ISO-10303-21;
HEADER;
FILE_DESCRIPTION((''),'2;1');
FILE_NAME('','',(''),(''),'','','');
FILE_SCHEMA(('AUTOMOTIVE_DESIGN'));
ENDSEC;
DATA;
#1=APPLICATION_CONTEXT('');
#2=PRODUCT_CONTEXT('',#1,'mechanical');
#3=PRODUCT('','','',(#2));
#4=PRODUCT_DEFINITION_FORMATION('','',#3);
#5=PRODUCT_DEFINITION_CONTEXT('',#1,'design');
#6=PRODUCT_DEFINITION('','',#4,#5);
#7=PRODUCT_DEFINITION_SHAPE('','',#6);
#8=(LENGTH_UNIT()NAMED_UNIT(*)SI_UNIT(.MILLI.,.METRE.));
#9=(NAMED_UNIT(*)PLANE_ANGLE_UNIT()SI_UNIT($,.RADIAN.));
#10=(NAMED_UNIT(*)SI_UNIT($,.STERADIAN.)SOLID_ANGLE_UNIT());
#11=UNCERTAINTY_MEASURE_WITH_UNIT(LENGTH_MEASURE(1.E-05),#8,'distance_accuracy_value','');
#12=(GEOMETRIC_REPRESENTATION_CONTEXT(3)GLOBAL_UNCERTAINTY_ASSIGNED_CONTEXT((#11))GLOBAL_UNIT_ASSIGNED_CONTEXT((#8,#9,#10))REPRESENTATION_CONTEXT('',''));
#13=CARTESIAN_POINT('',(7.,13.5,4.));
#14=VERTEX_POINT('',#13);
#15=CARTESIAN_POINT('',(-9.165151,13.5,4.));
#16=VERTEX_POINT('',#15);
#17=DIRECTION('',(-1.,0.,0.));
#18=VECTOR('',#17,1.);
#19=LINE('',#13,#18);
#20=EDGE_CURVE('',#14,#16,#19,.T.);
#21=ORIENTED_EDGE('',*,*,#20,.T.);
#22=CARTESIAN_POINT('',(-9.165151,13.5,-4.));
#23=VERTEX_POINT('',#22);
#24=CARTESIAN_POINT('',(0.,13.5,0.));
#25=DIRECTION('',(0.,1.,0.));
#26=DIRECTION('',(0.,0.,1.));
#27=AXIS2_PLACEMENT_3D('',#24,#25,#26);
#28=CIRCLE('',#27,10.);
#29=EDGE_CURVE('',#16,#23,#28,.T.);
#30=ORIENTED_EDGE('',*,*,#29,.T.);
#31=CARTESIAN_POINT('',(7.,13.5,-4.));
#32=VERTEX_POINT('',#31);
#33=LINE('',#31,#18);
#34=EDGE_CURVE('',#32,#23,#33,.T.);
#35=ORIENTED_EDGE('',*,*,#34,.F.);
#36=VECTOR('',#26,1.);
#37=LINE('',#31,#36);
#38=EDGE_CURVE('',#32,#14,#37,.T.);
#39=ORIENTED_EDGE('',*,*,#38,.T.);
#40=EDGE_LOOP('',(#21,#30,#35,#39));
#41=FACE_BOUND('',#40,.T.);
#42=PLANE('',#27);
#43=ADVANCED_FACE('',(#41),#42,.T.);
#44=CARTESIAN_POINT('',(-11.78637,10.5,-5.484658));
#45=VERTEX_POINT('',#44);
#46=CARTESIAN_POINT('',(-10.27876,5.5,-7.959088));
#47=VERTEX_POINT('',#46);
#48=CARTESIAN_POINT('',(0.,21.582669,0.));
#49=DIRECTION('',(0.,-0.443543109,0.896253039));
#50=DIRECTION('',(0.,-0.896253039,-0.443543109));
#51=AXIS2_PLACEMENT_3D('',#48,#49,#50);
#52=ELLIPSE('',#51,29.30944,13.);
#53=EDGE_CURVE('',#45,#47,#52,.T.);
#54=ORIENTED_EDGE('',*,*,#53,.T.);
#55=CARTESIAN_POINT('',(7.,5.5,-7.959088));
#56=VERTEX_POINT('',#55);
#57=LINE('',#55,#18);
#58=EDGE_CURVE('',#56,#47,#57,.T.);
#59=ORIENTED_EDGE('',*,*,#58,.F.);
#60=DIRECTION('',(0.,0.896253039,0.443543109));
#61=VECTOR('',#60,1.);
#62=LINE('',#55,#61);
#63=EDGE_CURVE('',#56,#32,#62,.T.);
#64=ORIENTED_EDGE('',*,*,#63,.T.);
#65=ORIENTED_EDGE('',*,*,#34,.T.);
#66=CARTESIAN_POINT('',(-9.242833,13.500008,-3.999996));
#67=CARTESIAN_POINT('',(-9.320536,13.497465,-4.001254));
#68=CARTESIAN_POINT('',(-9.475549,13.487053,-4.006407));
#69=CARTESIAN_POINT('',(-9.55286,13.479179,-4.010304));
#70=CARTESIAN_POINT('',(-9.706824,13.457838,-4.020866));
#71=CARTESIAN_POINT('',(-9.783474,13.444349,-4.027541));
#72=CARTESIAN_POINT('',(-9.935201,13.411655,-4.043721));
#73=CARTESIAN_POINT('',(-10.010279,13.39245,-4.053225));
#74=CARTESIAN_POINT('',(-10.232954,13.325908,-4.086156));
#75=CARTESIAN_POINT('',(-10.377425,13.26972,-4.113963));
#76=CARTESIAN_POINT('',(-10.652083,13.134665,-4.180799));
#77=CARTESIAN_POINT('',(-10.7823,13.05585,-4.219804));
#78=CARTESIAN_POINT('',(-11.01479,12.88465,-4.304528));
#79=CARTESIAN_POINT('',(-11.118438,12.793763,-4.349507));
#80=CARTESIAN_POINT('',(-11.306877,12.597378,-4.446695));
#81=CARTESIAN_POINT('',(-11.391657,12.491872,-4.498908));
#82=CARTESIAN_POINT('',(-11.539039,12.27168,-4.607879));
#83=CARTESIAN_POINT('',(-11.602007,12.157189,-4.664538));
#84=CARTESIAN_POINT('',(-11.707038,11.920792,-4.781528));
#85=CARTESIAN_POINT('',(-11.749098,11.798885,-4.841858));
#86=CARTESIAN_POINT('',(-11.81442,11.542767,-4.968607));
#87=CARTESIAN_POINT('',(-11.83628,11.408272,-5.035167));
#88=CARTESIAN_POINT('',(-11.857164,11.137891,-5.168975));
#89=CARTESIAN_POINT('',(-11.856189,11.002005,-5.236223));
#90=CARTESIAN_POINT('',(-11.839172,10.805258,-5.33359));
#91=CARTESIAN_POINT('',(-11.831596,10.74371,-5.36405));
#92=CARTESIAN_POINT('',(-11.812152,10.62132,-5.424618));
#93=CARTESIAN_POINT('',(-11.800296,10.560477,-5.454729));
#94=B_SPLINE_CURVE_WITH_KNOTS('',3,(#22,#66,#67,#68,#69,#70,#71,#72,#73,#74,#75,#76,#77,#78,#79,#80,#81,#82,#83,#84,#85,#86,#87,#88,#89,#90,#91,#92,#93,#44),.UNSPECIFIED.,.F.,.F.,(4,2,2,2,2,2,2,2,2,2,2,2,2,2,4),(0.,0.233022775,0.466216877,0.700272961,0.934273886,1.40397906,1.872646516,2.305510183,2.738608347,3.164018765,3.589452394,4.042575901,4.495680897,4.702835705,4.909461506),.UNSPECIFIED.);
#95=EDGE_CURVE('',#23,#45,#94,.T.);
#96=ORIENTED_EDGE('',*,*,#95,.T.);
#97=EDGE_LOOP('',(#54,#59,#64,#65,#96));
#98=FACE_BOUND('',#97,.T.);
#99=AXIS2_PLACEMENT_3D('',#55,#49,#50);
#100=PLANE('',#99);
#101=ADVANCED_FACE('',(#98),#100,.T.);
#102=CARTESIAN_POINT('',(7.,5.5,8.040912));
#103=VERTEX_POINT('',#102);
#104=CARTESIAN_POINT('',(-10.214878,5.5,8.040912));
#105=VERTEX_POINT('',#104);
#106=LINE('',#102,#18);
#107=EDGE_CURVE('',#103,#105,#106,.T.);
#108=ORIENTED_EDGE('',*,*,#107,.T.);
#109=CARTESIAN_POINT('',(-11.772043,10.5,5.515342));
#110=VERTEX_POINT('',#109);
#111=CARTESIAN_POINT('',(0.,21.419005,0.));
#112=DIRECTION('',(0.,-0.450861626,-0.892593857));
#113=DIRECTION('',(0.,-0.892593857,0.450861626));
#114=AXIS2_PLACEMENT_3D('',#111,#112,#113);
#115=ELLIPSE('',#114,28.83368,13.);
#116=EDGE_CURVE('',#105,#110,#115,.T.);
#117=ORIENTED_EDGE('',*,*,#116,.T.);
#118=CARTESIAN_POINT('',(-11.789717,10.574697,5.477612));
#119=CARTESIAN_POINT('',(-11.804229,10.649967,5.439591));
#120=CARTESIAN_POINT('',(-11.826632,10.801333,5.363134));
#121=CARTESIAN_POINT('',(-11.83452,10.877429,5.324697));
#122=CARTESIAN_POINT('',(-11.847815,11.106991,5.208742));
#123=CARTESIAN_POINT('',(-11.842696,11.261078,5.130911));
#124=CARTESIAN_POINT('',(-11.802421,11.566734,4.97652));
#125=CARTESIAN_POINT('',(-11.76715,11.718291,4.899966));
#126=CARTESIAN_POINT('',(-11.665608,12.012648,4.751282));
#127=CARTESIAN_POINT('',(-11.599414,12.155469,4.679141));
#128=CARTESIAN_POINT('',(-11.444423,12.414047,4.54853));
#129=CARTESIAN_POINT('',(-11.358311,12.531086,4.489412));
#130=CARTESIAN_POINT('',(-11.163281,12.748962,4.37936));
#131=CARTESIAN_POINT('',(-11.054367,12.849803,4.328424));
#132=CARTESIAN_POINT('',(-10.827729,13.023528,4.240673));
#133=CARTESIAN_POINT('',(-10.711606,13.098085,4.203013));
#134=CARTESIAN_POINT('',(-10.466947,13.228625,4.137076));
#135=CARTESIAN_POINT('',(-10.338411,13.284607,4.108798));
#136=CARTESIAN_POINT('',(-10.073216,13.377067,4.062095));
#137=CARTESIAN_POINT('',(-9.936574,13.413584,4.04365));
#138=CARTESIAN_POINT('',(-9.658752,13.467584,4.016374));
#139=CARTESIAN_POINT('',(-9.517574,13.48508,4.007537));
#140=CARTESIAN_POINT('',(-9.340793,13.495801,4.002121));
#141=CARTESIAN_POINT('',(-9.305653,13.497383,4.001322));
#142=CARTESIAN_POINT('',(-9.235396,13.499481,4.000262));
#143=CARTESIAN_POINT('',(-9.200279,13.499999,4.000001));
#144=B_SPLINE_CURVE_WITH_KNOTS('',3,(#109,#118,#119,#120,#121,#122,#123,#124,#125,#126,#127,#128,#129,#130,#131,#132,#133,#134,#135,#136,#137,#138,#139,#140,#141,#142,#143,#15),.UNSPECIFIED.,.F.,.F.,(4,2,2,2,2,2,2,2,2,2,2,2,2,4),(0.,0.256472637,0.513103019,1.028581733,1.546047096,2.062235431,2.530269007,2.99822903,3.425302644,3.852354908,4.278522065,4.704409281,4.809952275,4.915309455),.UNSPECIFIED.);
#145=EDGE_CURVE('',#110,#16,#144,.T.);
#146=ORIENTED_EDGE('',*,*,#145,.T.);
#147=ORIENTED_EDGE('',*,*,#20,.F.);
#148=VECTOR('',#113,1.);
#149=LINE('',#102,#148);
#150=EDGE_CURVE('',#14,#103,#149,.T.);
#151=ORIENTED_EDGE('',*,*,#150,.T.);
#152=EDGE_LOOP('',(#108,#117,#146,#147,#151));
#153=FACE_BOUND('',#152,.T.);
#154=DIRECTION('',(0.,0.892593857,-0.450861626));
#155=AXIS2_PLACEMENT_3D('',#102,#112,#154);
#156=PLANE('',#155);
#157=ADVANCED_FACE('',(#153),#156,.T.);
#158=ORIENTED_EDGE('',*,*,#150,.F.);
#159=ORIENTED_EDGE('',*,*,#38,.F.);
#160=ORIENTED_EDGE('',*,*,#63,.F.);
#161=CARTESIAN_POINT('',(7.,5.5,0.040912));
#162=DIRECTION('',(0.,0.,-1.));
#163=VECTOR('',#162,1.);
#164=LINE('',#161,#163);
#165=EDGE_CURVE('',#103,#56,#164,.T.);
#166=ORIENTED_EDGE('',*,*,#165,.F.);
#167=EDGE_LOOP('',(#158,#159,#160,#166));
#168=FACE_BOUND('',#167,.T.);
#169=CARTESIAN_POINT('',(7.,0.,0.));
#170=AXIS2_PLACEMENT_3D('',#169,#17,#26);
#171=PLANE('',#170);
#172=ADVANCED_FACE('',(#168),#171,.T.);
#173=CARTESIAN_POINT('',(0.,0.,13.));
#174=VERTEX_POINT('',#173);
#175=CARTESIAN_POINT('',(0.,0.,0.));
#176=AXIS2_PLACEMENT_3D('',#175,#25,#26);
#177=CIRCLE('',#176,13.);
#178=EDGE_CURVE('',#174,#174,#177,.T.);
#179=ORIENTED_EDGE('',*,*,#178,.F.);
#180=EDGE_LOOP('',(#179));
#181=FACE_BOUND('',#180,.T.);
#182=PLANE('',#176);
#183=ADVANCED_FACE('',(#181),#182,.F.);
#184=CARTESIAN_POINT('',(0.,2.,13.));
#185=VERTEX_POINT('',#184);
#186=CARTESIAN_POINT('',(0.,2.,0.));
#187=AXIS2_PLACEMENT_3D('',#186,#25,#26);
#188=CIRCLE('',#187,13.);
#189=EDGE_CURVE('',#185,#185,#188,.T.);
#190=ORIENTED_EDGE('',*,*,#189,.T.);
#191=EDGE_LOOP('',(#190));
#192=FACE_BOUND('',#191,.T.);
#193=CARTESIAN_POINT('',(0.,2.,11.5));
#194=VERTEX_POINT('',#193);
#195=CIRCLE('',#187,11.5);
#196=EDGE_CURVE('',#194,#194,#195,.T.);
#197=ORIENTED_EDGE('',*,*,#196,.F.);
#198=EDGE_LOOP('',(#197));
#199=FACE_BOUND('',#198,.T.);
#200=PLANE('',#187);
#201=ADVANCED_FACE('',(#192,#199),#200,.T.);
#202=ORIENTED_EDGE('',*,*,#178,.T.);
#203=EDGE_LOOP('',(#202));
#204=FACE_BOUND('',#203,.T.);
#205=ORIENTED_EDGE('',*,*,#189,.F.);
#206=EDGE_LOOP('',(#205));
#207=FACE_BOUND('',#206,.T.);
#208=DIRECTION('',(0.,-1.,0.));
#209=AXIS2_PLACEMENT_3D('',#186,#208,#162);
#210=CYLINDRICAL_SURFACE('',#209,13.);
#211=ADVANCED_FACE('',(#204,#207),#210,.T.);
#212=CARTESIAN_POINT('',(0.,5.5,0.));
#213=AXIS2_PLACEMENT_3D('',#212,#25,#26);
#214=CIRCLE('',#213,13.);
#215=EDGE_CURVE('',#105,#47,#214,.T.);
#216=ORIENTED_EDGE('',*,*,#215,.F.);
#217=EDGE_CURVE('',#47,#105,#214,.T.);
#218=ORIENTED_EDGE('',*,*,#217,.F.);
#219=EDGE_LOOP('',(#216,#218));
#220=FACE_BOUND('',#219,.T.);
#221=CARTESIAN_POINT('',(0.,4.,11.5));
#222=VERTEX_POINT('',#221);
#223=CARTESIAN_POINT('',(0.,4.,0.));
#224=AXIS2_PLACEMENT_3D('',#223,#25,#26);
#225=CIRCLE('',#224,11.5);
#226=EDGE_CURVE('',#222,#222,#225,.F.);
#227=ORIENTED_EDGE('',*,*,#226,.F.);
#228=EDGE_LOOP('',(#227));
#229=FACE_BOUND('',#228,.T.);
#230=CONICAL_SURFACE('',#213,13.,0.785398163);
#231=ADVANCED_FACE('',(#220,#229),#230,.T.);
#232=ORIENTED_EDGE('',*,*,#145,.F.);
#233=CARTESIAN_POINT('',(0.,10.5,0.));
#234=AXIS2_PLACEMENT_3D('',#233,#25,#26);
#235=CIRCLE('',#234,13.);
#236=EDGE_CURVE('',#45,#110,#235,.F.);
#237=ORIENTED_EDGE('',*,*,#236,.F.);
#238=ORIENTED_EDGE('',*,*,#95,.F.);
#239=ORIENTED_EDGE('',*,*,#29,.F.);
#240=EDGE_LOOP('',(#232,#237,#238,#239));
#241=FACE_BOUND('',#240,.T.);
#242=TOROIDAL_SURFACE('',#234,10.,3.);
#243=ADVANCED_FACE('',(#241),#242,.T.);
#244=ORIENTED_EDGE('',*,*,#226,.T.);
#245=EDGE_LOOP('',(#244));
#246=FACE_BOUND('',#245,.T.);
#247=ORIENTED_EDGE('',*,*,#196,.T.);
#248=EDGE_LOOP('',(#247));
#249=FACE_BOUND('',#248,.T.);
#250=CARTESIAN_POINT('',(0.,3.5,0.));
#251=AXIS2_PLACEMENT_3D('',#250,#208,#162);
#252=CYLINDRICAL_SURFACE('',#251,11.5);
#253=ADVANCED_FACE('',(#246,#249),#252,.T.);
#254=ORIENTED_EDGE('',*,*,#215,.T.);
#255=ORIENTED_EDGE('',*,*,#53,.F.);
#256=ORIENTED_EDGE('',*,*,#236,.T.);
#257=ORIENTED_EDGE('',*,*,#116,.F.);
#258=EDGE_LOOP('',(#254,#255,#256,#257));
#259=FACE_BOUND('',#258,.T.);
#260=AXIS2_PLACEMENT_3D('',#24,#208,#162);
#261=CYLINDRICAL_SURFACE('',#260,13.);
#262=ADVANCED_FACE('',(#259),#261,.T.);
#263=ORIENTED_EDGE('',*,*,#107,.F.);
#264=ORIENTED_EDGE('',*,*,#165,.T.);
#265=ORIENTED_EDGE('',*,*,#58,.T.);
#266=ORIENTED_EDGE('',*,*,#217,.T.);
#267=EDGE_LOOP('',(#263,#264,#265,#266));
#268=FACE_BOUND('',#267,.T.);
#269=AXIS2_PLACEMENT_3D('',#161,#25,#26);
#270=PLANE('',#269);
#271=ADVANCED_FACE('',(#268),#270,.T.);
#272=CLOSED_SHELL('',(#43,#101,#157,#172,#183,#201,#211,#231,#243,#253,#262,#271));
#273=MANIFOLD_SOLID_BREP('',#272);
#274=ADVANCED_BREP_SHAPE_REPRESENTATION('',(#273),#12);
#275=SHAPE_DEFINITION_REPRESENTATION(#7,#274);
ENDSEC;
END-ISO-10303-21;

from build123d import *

# Parameters (mm, degrees)
SKETCH1_R               = 13
BOSS_EXTRUDE1_DEPTH     = 2
SKETCH2_R               = 11.5
BOSS_EXTRUDE2_DEPTH     = 1.5
SKETCH3_R               = 13
BOSS_EXTRUDE4_DEPTH     = 10
CUT_EXTRUDE1_DEPTH      = 7
CUT_EXTRUDE1_DEPTH_BACK = 23.808989456
CHAMFER1_SIZE           = 2
FILLET1_R               = 3


with BuildPart() as part:
    # Sketch1 → Boss-Extrude1 (new body)
    with BuildSketch(Plane(origin=(0, 0, 0), x_dir=(1, 0, 0), z_dir=(0, 1, 0))):
        with Locations(Location((0, 0, 0), (0, 0, 270))):
            Circle(SKETCH1_R)
    extrude(amount=BOSS_EXTRUDE1_DEPTH)

    # Sketch2 → Boss-Extrude2 (add)
    with BuildSketch(Plane(origin=(0, 2, 0), x_dir=(1, 0, 0), z_dir=(0, 1, 0))):
        with Locations(Location((0, 0, 0), (0, 0, 270))):
            Circle(SKETCH2_R)
    extrude(amount=BOSS_EXTRUDE2_DEPTH)

    # Sketch3 → Boss-Extrude4 (add)
    with BuildSketch(Plane(origin=(0, 3.5, 0), x_dir=(1, 0, 0), z_dir=(0, 1, 0))):
        with Locations(Location((0, 0, 0), (0, 0, 270))):
            Circle(SKETCH3_R)
    extrude(amount=BOSS_EXTRUDE4_DEPTH)

    # Sketch4 → Cut-Extrude1 (cut, two sides: drawn at the far end of the back side and taken through both)
    with BuildSketch(Plane(origin=(0, 0, 0), x_dir=(0, 0, -1), z_dir=(1, 0, 0)).offset(-CUT_EXTRUDE1_DEPTH_BACK)):
        Polygon((-0.040911755, 5.5), (-8.040911755, 5.5), (-4, 13.5), (0, 13.5), (4, 13.5), (7.959088245, 5.5), align=None)
    extrude(amount=CUT_EXTRUDE1_DEPTH + CUT_EXTRUDE1_DEPTH_BACK, mode=Mode.SUBTRACT)

    # Chamfer1
    # the kernel refuses this chamfer: 2 mm, written as the material it takes off along each edge
    with BuildSketch(Plane(origin=(0, 3.5, 0), x_dir=(0, 0, 1), z_dir=(-1, 0, 0))) as chamfer1_piece_1_section:
        Polygon((13, CHAMFER1_SIZE), (13 - CHAMFER1_SIZE, 0), (13, 0), align=None)
    chamfer1_piece_1 = revolve(axis=Axis((0, 3.5, 0), (0, 1, 0)), mode=Mode.PRIVATE)
    chamfer1_piece_1 = chamfer1_piece_1 - Plane(origin=(0, 4.739987211, 0), x_dir=(0, 0, 1), z_dir=(0, -1, 0)) * Cylinder(11.5, 52, mode=Mode.PRIVATE)
    add(chamfer1_piece_1, mode=Mode.SUBTRACT)

    # Fillet1
    fillet1_edges = [part.edges().sort_by_distance(p)[0] for p in [
        (13, 13.5, 0),
    ]]
    fillet(fillet1_edges, radius=FILLET1_R)


solid = part.part
